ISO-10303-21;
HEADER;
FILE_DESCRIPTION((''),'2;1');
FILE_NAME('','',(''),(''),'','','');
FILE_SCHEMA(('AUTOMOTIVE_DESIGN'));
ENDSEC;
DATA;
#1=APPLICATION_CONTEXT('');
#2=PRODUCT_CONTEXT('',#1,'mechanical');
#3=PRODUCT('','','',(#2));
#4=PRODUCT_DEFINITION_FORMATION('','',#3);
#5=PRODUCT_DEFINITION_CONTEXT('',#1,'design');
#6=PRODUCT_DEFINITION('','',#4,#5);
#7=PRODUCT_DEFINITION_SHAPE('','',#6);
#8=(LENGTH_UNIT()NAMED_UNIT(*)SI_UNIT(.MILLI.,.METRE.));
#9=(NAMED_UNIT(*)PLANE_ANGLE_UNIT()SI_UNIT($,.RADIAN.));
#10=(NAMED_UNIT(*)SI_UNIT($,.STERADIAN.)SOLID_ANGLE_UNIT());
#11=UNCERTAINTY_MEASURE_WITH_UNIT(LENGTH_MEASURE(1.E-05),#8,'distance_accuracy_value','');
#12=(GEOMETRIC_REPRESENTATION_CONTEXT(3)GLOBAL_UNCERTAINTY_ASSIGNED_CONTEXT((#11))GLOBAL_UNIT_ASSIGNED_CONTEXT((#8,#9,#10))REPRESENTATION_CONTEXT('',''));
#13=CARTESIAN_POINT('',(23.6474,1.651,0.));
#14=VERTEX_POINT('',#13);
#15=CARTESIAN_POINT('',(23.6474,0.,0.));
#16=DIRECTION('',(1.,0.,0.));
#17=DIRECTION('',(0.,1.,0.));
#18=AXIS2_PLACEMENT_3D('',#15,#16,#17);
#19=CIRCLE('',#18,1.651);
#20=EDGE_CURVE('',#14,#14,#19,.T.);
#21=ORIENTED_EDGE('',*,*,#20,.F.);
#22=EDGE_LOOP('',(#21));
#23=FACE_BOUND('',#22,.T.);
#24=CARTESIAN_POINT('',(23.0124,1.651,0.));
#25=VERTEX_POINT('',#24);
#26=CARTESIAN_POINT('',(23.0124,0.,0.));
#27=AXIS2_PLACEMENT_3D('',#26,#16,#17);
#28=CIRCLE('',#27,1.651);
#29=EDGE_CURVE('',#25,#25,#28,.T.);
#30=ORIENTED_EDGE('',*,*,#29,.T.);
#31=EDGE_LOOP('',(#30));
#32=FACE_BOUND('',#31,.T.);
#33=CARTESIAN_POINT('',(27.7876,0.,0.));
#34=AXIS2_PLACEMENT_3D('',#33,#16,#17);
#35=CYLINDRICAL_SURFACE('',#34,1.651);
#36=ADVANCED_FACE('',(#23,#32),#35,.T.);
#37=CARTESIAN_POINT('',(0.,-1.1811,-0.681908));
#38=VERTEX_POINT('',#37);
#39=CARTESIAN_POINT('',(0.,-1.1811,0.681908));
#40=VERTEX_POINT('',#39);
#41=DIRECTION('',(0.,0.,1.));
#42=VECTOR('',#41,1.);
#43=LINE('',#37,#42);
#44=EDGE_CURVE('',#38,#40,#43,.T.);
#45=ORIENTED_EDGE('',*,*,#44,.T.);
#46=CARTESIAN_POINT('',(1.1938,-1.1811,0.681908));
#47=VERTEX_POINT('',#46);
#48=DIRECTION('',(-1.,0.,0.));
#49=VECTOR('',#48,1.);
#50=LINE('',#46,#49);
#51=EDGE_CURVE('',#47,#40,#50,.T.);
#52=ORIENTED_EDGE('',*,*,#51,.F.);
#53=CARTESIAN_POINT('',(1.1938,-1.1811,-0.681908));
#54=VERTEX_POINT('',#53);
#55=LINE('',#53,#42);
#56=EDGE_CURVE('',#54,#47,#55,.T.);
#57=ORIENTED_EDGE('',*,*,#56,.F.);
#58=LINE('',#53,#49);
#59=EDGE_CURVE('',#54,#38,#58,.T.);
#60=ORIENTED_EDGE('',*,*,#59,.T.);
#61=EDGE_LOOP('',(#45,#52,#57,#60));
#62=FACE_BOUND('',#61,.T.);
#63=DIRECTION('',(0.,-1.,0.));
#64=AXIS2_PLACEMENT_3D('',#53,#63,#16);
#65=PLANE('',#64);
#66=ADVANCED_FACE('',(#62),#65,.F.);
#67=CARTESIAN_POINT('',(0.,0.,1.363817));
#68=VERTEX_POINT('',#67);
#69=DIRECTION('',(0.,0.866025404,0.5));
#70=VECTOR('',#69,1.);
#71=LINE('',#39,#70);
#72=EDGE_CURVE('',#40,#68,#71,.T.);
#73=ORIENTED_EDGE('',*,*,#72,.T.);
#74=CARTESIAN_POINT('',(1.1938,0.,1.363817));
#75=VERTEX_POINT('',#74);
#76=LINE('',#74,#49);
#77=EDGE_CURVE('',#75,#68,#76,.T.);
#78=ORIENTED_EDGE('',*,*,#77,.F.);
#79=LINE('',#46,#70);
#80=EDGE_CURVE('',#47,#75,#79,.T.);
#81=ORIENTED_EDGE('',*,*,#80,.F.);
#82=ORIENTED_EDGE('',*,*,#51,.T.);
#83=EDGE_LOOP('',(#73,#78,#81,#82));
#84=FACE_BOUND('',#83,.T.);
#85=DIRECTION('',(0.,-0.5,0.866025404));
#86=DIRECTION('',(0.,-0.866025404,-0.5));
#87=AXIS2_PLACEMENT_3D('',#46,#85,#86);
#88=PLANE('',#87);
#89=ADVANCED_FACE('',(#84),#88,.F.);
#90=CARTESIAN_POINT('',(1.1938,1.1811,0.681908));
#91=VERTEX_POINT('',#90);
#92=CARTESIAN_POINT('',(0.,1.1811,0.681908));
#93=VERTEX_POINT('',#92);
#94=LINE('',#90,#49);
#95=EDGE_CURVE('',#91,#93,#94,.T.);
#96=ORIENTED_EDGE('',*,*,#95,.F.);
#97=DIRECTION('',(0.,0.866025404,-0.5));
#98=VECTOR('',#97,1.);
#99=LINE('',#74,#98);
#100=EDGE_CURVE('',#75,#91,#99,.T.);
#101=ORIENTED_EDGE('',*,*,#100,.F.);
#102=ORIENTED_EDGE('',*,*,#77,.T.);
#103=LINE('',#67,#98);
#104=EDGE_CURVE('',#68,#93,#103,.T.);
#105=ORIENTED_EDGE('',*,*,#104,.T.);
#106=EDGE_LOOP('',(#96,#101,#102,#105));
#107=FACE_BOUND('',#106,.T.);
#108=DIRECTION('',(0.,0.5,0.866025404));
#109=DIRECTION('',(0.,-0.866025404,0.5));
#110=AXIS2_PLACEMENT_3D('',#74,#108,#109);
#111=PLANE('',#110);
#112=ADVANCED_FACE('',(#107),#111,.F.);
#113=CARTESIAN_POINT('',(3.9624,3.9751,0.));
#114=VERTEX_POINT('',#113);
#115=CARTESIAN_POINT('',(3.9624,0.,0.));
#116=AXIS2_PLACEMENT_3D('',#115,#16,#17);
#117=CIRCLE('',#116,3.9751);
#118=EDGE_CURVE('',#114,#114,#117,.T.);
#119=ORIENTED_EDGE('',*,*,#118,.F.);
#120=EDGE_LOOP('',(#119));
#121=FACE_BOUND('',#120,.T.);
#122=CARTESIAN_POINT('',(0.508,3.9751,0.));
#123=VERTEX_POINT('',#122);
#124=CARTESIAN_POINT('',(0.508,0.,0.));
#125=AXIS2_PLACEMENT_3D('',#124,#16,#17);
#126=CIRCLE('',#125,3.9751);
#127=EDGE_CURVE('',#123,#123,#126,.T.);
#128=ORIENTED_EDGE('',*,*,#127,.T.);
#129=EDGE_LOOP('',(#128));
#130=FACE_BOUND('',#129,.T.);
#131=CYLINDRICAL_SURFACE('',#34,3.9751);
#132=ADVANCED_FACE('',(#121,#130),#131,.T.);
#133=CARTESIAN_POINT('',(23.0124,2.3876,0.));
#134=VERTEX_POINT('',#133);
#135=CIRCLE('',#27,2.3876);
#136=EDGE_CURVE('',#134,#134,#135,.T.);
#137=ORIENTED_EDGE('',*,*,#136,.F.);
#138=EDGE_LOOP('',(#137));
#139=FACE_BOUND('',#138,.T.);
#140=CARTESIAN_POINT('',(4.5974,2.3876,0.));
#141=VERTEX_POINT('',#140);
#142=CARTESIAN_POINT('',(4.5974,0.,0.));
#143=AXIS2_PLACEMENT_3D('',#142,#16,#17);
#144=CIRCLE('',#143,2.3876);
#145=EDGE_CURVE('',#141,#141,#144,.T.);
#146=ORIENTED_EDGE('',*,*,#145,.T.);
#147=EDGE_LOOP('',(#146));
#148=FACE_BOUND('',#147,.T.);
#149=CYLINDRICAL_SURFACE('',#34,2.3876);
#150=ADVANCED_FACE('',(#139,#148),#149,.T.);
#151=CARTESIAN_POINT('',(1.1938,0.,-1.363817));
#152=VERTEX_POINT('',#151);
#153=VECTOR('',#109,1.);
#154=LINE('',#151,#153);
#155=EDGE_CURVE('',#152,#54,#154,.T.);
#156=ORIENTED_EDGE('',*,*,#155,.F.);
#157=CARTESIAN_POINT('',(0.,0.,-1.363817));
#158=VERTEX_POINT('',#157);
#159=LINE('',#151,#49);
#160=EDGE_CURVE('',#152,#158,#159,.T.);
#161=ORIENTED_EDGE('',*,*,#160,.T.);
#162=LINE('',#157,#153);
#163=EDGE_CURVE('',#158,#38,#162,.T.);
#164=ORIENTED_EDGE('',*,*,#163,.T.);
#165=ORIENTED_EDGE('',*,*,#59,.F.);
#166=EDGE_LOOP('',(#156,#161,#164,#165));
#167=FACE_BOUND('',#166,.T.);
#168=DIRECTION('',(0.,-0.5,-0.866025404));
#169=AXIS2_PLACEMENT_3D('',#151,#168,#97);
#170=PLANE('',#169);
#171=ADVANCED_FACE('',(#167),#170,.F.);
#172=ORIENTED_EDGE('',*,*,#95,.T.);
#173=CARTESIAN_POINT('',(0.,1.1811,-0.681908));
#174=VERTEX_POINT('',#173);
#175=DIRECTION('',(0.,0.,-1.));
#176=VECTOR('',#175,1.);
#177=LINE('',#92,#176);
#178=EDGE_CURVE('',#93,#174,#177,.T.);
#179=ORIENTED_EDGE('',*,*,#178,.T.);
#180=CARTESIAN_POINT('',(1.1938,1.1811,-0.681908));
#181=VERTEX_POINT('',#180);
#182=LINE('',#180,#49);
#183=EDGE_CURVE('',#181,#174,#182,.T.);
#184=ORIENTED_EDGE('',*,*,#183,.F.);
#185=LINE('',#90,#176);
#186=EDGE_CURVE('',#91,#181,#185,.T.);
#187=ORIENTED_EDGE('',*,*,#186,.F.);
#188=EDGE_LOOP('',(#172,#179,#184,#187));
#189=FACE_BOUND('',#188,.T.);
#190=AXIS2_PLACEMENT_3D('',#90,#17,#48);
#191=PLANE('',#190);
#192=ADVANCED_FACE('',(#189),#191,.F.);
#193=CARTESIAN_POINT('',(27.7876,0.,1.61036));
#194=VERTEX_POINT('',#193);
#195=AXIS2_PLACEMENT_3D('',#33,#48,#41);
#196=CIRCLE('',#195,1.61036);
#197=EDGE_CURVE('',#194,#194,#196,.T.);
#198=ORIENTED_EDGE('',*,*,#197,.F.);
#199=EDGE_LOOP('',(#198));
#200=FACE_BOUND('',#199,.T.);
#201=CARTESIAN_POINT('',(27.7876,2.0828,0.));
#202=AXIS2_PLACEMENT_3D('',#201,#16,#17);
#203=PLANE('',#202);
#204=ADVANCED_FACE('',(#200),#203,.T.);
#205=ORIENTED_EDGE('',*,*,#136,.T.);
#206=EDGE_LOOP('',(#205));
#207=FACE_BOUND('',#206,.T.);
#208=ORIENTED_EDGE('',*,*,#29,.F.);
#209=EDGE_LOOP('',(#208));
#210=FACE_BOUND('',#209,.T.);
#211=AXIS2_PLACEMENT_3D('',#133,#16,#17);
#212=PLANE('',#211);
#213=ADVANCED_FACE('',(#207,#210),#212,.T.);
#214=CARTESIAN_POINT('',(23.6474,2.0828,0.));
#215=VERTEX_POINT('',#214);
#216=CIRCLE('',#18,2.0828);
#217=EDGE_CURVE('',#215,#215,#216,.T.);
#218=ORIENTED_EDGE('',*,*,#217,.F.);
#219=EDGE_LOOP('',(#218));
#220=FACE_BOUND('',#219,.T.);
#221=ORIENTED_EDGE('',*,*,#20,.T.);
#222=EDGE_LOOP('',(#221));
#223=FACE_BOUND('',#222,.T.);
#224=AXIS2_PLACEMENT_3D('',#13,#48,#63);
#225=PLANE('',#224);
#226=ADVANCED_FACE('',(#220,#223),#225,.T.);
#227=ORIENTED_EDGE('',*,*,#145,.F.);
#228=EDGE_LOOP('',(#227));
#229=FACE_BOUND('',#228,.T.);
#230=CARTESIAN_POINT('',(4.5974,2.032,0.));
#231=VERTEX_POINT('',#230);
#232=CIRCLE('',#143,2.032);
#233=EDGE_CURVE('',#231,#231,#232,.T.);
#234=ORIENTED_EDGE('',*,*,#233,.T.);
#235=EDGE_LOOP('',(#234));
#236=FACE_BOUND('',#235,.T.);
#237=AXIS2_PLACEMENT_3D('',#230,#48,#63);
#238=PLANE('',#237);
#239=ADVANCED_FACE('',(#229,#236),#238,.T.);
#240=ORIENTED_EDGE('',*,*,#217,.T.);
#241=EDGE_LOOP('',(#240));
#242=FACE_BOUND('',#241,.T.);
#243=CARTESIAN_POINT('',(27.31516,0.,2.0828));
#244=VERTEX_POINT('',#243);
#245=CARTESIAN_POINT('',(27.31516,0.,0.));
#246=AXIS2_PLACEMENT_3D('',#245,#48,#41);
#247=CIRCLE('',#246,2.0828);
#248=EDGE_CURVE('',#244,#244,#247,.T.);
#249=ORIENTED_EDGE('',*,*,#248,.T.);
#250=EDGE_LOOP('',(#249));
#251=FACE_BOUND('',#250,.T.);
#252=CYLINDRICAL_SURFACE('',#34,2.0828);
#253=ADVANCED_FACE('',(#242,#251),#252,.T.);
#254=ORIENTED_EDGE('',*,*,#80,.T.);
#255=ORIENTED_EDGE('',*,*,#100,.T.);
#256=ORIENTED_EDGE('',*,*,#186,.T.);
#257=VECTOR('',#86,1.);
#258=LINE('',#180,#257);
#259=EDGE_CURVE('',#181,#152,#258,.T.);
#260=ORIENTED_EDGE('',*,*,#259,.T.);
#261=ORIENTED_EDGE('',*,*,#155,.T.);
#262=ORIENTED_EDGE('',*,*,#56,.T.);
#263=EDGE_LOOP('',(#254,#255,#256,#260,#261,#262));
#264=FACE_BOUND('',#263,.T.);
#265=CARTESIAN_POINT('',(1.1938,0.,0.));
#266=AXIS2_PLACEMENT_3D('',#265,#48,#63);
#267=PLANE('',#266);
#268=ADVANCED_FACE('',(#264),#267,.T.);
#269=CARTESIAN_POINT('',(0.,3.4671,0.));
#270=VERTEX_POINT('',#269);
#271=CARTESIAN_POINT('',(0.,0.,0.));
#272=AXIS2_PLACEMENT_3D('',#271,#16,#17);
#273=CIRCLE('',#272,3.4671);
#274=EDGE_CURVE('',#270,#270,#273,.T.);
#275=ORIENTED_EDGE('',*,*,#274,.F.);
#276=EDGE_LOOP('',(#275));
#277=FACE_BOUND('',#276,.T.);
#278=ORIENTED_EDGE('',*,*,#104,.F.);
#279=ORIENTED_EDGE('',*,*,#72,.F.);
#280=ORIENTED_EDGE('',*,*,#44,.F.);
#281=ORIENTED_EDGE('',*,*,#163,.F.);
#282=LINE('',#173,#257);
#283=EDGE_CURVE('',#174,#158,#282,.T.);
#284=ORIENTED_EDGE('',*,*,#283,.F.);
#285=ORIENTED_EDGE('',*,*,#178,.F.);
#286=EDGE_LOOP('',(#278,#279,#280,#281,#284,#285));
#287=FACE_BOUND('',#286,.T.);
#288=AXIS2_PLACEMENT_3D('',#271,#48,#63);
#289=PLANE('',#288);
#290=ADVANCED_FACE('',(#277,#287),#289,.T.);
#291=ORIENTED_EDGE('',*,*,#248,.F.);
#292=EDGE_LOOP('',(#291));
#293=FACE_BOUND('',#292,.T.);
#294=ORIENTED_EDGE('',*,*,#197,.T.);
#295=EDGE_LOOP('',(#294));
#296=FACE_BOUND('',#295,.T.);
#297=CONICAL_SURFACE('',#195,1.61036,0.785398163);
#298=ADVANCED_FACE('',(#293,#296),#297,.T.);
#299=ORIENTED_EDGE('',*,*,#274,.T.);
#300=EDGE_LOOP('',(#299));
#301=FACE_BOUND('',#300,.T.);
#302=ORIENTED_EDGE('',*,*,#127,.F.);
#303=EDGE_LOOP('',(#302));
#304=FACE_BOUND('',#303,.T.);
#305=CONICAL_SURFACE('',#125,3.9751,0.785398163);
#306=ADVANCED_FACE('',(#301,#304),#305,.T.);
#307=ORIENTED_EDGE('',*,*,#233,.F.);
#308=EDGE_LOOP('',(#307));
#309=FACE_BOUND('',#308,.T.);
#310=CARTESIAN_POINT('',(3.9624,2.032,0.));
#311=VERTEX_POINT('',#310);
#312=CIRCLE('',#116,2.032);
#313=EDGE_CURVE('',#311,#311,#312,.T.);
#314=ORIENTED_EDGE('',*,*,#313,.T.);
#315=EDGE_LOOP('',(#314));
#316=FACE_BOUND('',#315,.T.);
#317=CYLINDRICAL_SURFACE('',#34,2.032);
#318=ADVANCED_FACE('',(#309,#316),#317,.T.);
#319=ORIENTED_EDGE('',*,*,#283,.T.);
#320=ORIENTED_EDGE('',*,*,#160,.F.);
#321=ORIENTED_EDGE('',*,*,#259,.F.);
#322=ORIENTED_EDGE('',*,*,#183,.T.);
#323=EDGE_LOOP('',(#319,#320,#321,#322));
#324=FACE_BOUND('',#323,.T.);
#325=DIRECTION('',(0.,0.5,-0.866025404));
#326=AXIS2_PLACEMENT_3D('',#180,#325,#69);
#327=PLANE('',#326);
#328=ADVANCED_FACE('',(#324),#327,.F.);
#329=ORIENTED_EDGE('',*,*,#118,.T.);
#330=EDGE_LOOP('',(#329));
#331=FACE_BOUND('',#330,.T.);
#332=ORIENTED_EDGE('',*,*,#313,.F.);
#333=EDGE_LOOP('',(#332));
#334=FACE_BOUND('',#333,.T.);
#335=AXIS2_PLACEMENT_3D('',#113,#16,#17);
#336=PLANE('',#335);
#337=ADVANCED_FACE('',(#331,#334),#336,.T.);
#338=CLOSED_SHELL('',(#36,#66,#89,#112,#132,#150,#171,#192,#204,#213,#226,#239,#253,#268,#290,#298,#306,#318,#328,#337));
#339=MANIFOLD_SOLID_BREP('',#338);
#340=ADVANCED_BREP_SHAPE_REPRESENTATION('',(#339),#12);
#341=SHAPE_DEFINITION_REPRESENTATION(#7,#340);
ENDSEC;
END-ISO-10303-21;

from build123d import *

# Parameters (mm, degrees)
CUT_EXTRUDE1_DEPTH = 1.1938


# Read off the part's stored shape, not the designer's step: #8-32 Machine Threads Stud1
with BuildPart() as part:
    # Sketch1 → Revolve1 (revolve)
    with BuildSketch(Plane.XY):
        Polygon((0, 0), (0, 3.4671), (0.508, 3.9751), (3.9624, 3.9751), (3.9624, 2.032), (4.5974, 2.032), (4.5974, 2.3876), (23.0124, 2.3876), (23.0124, 1.651), (23.6474, 1.651), (23.6474, 2.0828), (27.7876, 2.0828), (27.7876, 0), align=None)
    revolve(axis=Axis((27.7876, 0, 0), (-1, 0, 0)))

    # #8-32 Machine Threads Stud1 outline → #8-32 Machine Threads Stud1 (revolve, cut)
    with BuildSketch(Plane.YX):
        Polygon((2.0828, 27.7876), (1.61036, 27.7876), (2.0828, 27.31516), align=None)
    revolve(axis=Axis((0, 0, 0), (1, 0, 0)), mode=Mode.SUBTRACT)

    # Sketch3 → Cut-Extrude1 (cut)
    with BuildSketch(Plane.ZY):
        Polygon((1.363816806, 0), (0.681908403, 1.1811), (-0.681908403, 1.1811), (-1.363816806, 0), (-0.681908403, -1.1811), (0.681908403, -1.1811), align=None)
    extrude(amount=-CUT_EXTRUDE1_DEPTH, mode=Mode.SUBTRACT)


solid = part.part
